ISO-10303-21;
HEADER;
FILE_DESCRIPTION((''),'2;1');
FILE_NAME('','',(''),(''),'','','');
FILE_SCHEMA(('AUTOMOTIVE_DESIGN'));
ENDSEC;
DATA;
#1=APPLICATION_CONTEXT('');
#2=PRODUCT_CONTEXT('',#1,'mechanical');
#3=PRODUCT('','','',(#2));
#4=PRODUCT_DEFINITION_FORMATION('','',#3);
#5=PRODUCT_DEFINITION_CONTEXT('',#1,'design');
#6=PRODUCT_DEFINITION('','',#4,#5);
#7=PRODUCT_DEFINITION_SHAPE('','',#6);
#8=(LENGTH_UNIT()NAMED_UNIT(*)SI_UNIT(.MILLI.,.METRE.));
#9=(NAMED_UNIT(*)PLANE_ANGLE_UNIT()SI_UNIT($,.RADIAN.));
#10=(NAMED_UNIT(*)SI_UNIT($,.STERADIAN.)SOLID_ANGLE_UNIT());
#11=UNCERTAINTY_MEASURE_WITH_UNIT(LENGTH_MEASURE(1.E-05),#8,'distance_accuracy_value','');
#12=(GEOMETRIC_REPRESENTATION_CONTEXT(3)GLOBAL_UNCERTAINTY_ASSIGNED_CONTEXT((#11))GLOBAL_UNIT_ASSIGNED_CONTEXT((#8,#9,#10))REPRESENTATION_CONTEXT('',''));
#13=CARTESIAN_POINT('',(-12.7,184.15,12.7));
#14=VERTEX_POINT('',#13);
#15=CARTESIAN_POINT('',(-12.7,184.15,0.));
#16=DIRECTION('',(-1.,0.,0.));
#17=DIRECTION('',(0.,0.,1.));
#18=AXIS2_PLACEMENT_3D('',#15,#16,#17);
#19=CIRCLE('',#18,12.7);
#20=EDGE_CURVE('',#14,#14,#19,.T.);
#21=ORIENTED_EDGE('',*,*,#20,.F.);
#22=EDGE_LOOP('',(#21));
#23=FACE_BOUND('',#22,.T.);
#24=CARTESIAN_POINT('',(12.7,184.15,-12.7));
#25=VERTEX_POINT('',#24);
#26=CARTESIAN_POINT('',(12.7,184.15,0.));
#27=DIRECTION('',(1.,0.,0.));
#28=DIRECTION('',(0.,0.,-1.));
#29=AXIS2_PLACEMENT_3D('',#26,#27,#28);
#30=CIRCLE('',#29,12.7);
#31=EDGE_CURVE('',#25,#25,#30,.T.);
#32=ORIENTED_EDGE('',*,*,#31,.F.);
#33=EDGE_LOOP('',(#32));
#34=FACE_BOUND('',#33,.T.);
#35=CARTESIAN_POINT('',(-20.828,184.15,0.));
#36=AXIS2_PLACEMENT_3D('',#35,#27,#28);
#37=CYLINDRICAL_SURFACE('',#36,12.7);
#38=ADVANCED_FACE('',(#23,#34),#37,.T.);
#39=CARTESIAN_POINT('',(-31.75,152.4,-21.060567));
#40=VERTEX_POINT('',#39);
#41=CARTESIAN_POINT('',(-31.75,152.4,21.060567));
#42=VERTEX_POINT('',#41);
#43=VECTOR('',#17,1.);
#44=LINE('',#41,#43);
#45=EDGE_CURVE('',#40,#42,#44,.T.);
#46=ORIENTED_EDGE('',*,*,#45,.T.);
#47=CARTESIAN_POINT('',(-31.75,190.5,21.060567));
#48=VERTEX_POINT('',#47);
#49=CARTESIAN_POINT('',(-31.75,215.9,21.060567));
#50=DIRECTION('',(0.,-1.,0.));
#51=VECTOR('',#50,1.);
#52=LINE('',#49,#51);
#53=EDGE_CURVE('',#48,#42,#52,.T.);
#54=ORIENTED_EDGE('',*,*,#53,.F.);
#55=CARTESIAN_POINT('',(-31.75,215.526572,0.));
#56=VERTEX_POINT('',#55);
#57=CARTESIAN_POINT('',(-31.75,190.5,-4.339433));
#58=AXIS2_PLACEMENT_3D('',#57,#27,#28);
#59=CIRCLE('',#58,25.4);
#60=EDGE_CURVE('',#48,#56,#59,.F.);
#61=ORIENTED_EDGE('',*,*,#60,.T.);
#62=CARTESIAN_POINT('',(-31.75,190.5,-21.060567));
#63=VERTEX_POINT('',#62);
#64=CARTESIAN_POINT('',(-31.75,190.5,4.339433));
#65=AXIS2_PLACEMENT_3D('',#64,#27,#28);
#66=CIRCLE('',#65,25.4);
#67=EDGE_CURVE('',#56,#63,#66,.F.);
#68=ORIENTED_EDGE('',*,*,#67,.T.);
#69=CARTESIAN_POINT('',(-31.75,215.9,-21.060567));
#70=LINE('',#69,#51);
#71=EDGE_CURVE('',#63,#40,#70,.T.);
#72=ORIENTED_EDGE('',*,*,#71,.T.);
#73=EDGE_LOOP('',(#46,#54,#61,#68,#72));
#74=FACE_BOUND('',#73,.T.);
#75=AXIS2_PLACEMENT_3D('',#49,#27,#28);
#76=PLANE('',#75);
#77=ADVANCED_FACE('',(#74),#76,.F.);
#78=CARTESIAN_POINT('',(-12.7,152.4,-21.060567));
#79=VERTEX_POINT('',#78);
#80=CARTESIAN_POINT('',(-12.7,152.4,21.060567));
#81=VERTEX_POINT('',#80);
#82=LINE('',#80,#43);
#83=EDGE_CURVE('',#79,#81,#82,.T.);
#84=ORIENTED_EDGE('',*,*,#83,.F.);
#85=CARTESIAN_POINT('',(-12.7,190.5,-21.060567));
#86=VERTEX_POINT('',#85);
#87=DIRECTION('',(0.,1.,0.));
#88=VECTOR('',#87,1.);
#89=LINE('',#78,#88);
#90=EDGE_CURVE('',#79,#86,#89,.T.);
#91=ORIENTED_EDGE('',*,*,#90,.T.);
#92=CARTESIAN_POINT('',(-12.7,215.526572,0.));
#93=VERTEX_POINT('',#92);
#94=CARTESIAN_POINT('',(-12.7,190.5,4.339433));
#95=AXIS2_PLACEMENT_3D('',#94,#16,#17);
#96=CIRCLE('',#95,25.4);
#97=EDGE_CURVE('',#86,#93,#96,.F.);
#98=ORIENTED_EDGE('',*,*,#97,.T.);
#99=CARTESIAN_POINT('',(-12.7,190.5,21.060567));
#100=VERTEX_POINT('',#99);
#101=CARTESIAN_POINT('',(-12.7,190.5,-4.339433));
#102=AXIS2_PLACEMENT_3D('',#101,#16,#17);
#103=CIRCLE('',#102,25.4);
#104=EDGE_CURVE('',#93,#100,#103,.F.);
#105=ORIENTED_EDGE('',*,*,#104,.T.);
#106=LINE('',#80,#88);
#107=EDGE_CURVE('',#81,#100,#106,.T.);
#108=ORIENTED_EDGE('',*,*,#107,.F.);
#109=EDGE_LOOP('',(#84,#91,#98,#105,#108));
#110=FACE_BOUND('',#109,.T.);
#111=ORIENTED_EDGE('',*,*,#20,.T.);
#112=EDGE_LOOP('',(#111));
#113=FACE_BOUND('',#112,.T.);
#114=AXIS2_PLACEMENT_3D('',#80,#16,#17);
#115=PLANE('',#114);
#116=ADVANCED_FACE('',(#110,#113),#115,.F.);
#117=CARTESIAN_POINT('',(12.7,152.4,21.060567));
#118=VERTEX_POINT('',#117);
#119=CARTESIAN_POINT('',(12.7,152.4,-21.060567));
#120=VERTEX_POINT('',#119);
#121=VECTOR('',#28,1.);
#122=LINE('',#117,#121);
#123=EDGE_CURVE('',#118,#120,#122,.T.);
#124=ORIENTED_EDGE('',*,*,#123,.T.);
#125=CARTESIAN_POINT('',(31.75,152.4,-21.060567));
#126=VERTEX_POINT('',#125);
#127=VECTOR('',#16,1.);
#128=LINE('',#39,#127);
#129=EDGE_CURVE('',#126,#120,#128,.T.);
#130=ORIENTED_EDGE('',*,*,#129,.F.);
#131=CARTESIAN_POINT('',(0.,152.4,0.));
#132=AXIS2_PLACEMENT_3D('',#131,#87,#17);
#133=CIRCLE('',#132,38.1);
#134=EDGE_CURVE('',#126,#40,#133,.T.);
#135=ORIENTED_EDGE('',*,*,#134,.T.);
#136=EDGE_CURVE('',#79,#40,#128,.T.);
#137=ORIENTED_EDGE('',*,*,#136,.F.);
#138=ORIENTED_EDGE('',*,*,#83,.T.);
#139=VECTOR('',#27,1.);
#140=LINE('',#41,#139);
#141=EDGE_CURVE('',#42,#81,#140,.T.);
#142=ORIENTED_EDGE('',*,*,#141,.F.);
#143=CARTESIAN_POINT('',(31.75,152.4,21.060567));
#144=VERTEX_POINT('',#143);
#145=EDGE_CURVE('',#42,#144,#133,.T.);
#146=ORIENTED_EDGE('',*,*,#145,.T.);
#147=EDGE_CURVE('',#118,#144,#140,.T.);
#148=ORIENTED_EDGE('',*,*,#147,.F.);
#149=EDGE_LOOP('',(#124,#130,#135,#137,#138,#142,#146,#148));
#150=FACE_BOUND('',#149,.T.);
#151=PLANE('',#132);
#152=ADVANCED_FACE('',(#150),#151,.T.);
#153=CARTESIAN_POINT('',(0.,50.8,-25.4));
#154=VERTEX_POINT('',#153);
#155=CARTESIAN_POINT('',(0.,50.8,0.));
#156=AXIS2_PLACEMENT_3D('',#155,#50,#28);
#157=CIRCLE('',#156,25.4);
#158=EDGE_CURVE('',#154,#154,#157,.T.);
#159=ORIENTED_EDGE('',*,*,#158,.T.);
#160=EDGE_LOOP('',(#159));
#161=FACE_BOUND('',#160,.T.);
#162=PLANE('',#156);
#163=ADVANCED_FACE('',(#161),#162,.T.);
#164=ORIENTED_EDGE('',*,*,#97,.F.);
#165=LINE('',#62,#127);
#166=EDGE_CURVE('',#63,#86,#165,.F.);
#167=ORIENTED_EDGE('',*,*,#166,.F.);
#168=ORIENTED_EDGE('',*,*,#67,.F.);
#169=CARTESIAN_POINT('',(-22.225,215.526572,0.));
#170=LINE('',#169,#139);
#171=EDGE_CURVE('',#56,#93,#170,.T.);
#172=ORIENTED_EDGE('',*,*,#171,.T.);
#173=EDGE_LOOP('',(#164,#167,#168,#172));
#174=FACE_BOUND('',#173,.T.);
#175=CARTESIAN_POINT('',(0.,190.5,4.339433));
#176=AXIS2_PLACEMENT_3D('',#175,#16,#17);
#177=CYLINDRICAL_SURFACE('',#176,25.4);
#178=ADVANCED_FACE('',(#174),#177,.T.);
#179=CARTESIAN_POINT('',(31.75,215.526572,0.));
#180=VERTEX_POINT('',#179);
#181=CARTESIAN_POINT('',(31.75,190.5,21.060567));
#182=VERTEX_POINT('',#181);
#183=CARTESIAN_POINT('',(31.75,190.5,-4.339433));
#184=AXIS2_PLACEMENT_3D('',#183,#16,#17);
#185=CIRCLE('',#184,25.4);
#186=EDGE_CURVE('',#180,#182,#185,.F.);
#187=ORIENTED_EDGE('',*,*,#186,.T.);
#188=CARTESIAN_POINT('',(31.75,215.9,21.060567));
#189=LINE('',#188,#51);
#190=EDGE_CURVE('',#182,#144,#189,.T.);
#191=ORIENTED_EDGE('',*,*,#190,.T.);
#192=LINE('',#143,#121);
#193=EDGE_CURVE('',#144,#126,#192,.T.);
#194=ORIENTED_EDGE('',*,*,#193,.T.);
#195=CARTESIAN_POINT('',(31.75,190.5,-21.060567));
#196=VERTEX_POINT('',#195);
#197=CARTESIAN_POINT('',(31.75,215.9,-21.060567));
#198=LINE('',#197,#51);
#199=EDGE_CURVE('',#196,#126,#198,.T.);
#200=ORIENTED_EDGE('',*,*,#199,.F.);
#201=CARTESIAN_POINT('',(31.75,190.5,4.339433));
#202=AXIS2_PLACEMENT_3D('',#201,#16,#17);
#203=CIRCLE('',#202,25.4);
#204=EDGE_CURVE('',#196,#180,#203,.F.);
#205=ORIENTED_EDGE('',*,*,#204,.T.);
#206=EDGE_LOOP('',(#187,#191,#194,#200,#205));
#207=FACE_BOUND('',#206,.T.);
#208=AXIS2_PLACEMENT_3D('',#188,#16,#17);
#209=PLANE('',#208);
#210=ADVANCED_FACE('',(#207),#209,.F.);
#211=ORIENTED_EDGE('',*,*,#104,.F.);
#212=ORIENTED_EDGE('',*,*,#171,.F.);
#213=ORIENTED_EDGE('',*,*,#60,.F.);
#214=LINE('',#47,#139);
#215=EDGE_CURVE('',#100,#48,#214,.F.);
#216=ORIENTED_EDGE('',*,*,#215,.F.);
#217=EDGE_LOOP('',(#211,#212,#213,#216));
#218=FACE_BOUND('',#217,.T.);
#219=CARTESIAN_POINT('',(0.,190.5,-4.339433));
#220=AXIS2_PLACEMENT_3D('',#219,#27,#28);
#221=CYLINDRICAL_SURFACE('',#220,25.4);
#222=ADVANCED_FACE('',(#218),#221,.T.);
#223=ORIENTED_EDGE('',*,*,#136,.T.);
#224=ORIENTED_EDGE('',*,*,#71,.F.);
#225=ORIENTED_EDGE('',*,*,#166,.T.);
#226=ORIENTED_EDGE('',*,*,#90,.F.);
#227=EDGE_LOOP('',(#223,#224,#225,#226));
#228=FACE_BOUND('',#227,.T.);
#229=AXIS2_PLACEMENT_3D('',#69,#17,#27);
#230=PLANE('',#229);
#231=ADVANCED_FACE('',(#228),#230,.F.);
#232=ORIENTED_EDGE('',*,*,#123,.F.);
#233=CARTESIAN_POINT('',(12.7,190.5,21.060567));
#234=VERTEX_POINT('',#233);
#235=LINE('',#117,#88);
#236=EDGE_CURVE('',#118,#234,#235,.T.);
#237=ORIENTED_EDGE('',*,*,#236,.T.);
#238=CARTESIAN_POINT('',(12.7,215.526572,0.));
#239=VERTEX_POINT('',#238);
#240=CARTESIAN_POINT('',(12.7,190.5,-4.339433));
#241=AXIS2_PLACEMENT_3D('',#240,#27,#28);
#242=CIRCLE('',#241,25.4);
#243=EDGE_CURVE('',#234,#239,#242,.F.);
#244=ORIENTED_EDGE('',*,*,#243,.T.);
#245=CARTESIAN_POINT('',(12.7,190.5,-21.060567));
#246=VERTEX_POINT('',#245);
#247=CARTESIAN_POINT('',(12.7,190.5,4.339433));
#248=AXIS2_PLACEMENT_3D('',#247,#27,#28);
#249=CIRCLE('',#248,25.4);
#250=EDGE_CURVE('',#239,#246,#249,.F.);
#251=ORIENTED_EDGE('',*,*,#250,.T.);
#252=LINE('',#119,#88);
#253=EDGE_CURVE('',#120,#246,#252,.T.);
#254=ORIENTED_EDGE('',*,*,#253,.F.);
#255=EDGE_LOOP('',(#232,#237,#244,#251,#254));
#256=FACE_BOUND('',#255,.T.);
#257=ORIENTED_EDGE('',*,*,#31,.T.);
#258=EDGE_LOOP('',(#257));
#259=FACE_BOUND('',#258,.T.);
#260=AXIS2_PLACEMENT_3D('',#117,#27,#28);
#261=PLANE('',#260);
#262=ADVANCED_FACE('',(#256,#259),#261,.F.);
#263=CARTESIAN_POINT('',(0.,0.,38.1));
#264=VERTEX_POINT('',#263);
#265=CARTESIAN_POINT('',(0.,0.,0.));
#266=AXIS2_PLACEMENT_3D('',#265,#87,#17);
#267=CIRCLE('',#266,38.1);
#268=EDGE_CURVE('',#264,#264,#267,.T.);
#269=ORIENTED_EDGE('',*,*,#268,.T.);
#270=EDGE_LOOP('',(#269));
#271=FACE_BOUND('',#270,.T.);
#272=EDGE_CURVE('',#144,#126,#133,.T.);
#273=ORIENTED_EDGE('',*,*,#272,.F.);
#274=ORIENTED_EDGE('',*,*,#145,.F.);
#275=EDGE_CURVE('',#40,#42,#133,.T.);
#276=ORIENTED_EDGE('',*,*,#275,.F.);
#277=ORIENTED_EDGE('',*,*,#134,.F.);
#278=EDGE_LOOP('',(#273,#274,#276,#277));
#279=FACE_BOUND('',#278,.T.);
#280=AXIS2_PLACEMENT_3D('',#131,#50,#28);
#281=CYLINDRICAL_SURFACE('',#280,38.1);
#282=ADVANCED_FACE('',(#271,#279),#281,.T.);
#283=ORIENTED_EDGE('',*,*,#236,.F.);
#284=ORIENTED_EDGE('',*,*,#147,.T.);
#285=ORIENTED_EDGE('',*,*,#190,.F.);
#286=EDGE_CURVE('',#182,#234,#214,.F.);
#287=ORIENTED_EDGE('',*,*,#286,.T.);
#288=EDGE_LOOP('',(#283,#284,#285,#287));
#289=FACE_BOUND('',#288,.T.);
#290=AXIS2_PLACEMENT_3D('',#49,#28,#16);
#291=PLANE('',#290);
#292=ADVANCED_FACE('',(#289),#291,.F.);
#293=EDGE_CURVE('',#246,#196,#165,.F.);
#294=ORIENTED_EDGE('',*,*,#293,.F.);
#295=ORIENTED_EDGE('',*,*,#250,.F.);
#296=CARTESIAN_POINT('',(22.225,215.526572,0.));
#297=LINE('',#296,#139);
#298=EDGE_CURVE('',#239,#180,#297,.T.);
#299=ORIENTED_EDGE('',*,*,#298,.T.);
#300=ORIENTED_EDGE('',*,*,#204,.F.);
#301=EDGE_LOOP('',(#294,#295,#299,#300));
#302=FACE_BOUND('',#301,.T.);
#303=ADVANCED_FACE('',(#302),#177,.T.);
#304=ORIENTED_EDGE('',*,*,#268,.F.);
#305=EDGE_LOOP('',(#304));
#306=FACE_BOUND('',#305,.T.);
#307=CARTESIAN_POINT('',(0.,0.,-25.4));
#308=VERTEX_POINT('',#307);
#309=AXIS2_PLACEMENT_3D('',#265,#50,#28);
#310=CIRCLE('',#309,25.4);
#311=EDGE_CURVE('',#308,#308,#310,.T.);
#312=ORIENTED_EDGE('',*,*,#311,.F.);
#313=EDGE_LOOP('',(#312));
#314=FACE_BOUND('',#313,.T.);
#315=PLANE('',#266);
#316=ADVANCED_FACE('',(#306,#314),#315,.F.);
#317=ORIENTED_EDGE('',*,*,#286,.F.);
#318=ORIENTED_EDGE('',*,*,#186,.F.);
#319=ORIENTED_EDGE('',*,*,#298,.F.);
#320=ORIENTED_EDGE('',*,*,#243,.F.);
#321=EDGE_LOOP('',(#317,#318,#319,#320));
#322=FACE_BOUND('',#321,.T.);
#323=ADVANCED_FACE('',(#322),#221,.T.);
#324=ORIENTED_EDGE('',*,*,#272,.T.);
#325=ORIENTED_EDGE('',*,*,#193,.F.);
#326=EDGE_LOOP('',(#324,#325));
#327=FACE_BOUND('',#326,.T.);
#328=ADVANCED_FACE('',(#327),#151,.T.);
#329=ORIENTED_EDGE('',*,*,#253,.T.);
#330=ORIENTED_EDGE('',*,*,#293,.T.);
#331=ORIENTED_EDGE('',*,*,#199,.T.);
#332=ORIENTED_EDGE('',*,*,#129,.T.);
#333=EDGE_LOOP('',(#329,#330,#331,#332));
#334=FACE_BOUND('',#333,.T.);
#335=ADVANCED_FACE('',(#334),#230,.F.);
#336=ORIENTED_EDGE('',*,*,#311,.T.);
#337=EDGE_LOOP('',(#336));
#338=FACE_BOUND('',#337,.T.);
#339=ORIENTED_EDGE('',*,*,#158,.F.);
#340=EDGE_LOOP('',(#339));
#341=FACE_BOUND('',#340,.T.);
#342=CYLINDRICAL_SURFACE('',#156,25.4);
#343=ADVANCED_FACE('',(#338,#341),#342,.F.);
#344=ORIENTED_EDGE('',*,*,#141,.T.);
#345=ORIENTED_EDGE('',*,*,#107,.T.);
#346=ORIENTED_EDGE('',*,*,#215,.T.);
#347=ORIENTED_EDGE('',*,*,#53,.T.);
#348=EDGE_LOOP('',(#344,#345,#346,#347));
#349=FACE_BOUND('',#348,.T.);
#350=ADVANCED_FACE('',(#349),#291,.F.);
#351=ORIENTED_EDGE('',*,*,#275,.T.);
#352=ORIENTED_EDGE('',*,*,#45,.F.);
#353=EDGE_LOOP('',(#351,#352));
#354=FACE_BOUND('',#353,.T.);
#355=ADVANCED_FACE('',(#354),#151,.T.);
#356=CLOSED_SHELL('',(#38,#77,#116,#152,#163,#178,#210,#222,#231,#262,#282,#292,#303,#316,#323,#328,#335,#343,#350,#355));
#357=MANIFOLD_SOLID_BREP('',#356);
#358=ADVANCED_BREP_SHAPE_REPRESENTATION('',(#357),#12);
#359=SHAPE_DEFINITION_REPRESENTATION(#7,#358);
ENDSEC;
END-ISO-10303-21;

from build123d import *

# Parameters (mm, degrees)
SKETCH1_R           = 38.1
BOSS_EXTRUDE1_DEPTH = 152.4
SKETCH2_W           = 63.5
SKETCH2_H           = 42.121134838
BOSS_EXTRUDE2_DEPTH = 63.5
SKETCH3_W           = 25.4
SKETCH3_H           = 42.121134838
CUT_EXTRUDE1_DEPTH  = 63.5
FILLET1_R           = 25.4
SKETCH5_R           = 25.4
CUT_EXTRUDE3_DEPTH  = 50.8
SKETCH4_R           = 12.7
BOSS_EXTRUDE3_DEPTH = 52.578


with BuildPart() as part:
    # Sketch1 → Boss-Extrude1 (new body)
    with BuildSketch(Plane(origin=(0, 0, 0), x_dir=(1, 0, 0), z_dir=(0, 1, 0))):
        with Locations(Location((0, 0, 0), (0, 0, 90))):
            Circle(SKETCH1_R)
    extrude(amount=BOSS_EXTRUDE1_DEPTH)

    # Sketch2 → Boss-Extrude2 (add)
    with BuildSketch(Plane(origin=(0, 152.4, 0), x_dir=(1, 0, 0), z_dir=(0, 1, 0))):
        Rectangle(SKETCH2_W, SKETCH2_H)
    extrude(amount=BOSS_EXTRUDE2_DEPTH)

    # Sketch3 → Cut-Extrude1 (cut)
    with BuildSketch(Plane(origin=(0, 215.9, 0), x_dir=(1, 0, 0), z_dir=(0, 1, 0))):
        Rectangle(SKETCH3_W, SKETCH3_H)
    extrude(amount=-CUT_EXTRUDE1_DEPTH, mode=Mode.SUBTRACT)

    # Fillet1
    # the kernel refuses this fillet: 25.4 mm, written as the material it takes off along each edge
    with BuildSketch(Plane(origin=(50.8, 215.9, -21.060567419), x_dir=(0, -1, 0), z_dir=(-1, 0, 0)), Plane(origin=(-95.25, 215.9, 21.060567419), x_dir=(0, -1, 0), z_dir=(1, 0, 0)), Plane(origin=(95.25, 215.9, -21.060567419), x_dir=(0, -1, 0), z_dir=(-1, 0, 0)), Plane(origin=(-50.8, 215.9, 21.060567419), x_dir=(0, -1, 0), z_dir=(1, 0, 0))) as fillet1_piece_1:
        with BuildLine():
            CenterArc((FILLET1_R, FILLET1_R), FILLET1_R, 180, 90)
            Line((0, FILLET1_R), (0, 0))
            Line((0, 0), (FILLET1_R, 0))
        make_face()
    extrude(amount=146.05, mode=Mode.SUBTRACT)

    # Sketch5 → Cut-Extrude3 (cut)
    with BuildSketch(Plane.XZ):
        with Locations(Location((0, 0, 0), (0, 0, 270))):
            Circle(SKETCH5_R)
    extrude(amount=-CUT_EXTRUDE3_DEPTH, mode=Mode.SUBTRACT)

    # Sketch4 → Boss-Extrude3 (add)
    with BuildSketch(Plane(origin=(31.75, 0, 0), x_dir=(0, 0, -1), z_dir=(1, 0, 0))):
        with Locations((0, 184.15)):
            Circle(SKETCH4_R)
    extrude(amount=-BOSS_EXTRUDE3_DEPTH)


solid = part.part
